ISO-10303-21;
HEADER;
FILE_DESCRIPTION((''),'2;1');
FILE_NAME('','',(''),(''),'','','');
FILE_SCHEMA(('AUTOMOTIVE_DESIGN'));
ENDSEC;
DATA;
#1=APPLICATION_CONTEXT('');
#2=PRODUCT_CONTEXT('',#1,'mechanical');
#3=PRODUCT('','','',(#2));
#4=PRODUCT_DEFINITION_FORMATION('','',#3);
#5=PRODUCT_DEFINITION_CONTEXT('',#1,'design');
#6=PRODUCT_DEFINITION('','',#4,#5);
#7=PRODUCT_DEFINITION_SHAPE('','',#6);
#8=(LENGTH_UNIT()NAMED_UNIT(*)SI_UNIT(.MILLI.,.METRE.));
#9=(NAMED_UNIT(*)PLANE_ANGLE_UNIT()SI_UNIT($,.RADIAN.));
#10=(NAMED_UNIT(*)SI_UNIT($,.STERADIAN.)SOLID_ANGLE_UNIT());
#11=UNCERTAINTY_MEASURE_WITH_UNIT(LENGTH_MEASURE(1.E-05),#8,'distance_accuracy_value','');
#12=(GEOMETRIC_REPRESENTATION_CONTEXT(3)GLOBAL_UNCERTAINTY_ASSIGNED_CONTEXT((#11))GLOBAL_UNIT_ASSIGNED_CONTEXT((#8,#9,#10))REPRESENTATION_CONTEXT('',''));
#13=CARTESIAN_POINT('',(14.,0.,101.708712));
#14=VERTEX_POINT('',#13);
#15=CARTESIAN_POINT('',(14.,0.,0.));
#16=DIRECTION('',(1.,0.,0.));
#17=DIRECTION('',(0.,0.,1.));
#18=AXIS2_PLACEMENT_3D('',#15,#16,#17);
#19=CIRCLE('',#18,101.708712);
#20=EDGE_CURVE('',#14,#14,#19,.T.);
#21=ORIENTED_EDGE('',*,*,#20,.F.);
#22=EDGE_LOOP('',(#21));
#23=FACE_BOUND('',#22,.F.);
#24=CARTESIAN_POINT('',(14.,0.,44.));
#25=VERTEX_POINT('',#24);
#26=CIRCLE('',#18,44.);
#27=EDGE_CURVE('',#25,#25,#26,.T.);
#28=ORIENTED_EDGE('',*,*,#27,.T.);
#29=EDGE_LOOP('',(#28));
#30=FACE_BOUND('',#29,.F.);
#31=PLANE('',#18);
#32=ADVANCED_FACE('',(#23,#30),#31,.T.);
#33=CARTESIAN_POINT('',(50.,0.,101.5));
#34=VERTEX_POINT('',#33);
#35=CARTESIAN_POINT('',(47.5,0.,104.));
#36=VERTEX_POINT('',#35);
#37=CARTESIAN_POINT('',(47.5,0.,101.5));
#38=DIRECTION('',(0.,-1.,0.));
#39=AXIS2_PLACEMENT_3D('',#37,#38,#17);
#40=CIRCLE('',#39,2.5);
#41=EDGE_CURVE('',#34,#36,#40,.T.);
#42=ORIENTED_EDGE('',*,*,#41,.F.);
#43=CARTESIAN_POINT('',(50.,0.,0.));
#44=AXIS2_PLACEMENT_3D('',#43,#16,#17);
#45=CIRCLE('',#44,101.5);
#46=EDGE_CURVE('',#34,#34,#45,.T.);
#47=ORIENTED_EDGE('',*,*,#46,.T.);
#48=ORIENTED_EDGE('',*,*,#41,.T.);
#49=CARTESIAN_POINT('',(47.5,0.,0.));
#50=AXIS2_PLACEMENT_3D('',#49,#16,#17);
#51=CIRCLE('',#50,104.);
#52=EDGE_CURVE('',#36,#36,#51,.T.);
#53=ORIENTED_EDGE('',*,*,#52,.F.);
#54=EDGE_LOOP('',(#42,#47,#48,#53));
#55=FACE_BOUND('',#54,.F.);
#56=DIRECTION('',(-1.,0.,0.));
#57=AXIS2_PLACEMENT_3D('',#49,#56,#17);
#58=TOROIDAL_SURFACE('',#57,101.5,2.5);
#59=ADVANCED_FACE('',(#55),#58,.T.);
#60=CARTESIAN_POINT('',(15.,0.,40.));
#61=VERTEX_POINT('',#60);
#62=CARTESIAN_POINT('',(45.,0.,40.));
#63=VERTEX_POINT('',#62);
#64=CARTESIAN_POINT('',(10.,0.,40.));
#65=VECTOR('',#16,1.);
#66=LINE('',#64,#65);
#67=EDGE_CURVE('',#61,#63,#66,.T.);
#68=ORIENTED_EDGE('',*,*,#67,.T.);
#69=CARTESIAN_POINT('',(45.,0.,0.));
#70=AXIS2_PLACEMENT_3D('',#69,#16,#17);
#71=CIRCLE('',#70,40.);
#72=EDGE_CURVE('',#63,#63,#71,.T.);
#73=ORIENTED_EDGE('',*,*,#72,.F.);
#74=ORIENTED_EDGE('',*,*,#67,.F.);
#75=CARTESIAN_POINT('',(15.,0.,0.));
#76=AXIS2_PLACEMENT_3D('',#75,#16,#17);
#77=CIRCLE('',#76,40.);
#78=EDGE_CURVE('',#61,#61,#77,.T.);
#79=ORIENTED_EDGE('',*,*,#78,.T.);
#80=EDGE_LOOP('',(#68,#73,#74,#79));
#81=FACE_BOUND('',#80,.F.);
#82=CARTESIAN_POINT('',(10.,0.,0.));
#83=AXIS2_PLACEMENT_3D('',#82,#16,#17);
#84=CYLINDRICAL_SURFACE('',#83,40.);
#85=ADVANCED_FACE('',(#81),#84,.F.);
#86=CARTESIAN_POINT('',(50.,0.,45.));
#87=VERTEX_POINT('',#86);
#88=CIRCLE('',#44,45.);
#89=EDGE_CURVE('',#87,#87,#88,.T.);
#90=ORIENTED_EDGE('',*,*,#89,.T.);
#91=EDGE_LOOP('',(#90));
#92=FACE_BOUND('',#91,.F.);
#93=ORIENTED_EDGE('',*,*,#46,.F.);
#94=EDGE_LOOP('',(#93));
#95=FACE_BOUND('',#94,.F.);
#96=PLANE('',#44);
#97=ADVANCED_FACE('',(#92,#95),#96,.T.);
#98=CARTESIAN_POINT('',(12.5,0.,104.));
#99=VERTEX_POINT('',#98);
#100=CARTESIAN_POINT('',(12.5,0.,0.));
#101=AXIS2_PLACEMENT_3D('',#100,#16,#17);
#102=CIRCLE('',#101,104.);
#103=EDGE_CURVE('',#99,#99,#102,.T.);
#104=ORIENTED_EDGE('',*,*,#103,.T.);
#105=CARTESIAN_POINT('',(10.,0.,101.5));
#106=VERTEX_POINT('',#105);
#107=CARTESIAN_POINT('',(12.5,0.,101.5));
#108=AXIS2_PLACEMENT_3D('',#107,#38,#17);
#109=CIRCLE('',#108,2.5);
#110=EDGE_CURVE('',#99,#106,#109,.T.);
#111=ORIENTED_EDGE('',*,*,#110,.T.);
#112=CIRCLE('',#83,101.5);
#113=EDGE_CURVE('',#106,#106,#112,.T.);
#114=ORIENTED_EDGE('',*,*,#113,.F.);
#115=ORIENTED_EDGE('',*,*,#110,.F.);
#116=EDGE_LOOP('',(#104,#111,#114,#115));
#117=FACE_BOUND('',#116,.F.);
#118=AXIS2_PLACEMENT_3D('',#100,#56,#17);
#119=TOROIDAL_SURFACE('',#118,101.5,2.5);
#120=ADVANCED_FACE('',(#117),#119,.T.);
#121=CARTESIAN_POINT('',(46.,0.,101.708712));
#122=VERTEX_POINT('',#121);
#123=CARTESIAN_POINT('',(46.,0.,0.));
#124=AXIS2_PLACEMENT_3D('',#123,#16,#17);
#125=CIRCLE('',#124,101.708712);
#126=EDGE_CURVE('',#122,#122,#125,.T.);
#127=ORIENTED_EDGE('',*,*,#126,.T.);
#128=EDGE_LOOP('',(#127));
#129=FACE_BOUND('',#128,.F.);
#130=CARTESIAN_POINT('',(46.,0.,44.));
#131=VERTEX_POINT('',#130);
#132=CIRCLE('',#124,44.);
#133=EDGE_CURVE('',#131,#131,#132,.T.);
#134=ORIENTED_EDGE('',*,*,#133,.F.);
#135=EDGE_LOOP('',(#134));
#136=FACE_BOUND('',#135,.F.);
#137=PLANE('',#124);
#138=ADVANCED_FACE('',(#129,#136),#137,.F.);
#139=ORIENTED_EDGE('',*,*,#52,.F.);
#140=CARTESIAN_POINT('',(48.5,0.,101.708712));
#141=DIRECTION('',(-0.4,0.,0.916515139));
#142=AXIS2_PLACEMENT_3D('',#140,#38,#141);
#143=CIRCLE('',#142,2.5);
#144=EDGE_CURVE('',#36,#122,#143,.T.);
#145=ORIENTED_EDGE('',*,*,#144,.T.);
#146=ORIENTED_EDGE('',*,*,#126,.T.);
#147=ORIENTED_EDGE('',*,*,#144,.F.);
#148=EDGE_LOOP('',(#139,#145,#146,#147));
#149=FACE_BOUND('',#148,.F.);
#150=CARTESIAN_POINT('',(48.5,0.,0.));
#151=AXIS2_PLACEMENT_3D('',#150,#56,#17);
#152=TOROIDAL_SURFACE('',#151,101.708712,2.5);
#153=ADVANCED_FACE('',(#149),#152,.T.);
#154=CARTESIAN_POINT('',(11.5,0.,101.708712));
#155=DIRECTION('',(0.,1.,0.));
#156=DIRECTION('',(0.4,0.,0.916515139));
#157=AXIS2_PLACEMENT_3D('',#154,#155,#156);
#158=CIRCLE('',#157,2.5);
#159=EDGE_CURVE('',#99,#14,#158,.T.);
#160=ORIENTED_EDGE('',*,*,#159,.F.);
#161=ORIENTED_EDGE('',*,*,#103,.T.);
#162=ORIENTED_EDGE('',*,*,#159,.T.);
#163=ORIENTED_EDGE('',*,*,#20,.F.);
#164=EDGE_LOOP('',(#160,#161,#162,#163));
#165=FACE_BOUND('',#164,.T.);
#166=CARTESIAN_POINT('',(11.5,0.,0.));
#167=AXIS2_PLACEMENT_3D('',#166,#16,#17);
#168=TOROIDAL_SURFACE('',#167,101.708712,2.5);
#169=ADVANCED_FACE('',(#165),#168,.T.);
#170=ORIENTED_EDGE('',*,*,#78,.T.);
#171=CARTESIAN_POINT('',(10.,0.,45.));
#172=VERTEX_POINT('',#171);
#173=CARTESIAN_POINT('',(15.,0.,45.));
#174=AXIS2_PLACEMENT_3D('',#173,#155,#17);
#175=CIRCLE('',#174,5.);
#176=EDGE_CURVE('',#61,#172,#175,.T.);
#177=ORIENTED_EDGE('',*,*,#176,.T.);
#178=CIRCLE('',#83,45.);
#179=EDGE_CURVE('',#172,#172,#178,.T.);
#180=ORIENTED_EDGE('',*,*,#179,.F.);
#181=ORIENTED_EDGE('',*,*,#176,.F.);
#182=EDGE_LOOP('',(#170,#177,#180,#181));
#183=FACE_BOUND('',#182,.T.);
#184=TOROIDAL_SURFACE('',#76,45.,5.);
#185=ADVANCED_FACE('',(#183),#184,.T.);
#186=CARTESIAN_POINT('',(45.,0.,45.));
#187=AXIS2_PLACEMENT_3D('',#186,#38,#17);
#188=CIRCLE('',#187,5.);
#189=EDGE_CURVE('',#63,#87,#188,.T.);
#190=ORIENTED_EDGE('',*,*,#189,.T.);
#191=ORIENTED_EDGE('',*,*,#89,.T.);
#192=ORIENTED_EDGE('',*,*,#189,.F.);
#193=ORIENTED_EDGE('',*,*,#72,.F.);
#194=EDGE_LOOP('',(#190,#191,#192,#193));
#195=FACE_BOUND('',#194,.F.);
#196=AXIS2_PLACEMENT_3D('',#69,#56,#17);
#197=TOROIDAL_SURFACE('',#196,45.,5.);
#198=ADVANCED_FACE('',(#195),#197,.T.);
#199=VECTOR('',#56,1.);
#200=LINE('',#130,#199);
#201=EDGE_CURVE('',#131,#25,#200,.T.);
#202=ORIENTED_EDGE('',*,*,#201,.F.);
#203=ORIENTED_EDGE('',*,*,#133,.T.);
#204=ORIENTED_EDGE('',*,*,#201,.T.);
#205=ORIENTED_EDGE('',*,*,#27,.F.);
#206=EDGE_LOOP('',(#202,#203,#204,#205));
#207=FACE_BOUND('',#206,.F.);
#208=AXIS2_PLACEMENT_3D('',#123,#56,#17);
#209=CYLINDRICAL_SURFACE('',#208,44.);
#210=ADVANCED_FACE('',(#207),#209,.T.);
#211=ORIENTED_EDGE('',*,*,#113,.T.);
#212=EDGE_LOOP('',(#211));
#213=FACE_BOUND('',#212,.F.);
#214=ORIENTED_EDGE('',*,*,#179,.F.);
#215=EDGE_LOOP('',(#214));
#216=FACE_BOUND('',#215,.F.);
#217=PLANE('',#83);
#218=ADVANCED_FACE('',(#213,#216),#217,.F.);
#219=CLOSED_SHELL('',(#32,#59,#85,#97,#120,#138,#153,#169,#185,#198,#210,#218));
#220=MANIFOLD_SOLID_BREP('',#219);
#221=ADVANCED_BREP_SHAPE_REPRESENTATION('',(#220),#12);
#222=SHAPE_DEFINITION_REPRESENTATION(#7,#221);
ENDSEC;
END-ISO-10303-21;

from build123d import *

# Parameters (mm, degrees)
F2_R = 2.5
F4_R = 5
F5_R = 5


# Not quite as in the source:
# - a fillet or chamfer that OpenCascade refuses, or shapes differently, is made with other operations: its cross-section is extruded or revolved along the edge and cut away or added


with BuildPart() as f1:
    # F0 (on Front) → F1 (revolve)
    with BuildSketch(Plane.XZ):
        Polygon((10, 44), (10, 40), (50, 40), (50, 44), (50, 104), (46, 104), (46, 44), (14, 44), (14, 104), (10, 104), align=None)
    revolve(axis=Axis((30, 0, 0), (1, 0, 0)))

    # F2
    f2_edges = [f1.edges().sort_by_distance(p)[0] for p in [
        (10, 0, -104),
        (50, 0, -104),
    ]]
    fillet(f2_edges, radius=F2_R)

    # F3: fillet of radius 2.5 on 2 edges, made by hand

    # F3_s1 → F3_t2 (revolve, cut)
    with BuildSketch(Plane.XZ):
        with BuildLine():
            ThreePointArc((12.5, 104), (13.5916500663, 103.0780185463), (14, 101.7087121525))
            Line((14, 101.7087121525), (14, 104))
            Line((14, 104), (12.5, 104))
        make_face()
    revolve(axis=Axis((14, 0, 0), (1, 0, 0)), mode=Mode.SUBTRACT)

    # F3_s3 → F3_t4 (revolve, cut)
    with BuildSketch(Plane.XZ):
        with BuildLine():
            ThreePointArc((47.5, 104), (46.4083499337, 103.0780185463), (46, 101.7087121525))
            Line((46, 101.7087121525), (46, 104))
            Line((46, 104), (47.5, 104))
        make_face()
    revolve(axis=Axis((46, 0, 0), (1, 0, 0)), mode=Mode.SUBTRACT)

    # F4
    f4_edges = [f1.edges().sort_by_distance(p)[0] for p in [
        (10, 0, -40),
    ]]
    fillet(f4_edges, radius=F4_R)

    # F5
    f5_edges = [f1.edges().sort_by_distance(p)[0] for p in [
        (50, 0, -40),
    ]]
    fillet(f5_edges, radius=F5_R)


solid = f1.part
